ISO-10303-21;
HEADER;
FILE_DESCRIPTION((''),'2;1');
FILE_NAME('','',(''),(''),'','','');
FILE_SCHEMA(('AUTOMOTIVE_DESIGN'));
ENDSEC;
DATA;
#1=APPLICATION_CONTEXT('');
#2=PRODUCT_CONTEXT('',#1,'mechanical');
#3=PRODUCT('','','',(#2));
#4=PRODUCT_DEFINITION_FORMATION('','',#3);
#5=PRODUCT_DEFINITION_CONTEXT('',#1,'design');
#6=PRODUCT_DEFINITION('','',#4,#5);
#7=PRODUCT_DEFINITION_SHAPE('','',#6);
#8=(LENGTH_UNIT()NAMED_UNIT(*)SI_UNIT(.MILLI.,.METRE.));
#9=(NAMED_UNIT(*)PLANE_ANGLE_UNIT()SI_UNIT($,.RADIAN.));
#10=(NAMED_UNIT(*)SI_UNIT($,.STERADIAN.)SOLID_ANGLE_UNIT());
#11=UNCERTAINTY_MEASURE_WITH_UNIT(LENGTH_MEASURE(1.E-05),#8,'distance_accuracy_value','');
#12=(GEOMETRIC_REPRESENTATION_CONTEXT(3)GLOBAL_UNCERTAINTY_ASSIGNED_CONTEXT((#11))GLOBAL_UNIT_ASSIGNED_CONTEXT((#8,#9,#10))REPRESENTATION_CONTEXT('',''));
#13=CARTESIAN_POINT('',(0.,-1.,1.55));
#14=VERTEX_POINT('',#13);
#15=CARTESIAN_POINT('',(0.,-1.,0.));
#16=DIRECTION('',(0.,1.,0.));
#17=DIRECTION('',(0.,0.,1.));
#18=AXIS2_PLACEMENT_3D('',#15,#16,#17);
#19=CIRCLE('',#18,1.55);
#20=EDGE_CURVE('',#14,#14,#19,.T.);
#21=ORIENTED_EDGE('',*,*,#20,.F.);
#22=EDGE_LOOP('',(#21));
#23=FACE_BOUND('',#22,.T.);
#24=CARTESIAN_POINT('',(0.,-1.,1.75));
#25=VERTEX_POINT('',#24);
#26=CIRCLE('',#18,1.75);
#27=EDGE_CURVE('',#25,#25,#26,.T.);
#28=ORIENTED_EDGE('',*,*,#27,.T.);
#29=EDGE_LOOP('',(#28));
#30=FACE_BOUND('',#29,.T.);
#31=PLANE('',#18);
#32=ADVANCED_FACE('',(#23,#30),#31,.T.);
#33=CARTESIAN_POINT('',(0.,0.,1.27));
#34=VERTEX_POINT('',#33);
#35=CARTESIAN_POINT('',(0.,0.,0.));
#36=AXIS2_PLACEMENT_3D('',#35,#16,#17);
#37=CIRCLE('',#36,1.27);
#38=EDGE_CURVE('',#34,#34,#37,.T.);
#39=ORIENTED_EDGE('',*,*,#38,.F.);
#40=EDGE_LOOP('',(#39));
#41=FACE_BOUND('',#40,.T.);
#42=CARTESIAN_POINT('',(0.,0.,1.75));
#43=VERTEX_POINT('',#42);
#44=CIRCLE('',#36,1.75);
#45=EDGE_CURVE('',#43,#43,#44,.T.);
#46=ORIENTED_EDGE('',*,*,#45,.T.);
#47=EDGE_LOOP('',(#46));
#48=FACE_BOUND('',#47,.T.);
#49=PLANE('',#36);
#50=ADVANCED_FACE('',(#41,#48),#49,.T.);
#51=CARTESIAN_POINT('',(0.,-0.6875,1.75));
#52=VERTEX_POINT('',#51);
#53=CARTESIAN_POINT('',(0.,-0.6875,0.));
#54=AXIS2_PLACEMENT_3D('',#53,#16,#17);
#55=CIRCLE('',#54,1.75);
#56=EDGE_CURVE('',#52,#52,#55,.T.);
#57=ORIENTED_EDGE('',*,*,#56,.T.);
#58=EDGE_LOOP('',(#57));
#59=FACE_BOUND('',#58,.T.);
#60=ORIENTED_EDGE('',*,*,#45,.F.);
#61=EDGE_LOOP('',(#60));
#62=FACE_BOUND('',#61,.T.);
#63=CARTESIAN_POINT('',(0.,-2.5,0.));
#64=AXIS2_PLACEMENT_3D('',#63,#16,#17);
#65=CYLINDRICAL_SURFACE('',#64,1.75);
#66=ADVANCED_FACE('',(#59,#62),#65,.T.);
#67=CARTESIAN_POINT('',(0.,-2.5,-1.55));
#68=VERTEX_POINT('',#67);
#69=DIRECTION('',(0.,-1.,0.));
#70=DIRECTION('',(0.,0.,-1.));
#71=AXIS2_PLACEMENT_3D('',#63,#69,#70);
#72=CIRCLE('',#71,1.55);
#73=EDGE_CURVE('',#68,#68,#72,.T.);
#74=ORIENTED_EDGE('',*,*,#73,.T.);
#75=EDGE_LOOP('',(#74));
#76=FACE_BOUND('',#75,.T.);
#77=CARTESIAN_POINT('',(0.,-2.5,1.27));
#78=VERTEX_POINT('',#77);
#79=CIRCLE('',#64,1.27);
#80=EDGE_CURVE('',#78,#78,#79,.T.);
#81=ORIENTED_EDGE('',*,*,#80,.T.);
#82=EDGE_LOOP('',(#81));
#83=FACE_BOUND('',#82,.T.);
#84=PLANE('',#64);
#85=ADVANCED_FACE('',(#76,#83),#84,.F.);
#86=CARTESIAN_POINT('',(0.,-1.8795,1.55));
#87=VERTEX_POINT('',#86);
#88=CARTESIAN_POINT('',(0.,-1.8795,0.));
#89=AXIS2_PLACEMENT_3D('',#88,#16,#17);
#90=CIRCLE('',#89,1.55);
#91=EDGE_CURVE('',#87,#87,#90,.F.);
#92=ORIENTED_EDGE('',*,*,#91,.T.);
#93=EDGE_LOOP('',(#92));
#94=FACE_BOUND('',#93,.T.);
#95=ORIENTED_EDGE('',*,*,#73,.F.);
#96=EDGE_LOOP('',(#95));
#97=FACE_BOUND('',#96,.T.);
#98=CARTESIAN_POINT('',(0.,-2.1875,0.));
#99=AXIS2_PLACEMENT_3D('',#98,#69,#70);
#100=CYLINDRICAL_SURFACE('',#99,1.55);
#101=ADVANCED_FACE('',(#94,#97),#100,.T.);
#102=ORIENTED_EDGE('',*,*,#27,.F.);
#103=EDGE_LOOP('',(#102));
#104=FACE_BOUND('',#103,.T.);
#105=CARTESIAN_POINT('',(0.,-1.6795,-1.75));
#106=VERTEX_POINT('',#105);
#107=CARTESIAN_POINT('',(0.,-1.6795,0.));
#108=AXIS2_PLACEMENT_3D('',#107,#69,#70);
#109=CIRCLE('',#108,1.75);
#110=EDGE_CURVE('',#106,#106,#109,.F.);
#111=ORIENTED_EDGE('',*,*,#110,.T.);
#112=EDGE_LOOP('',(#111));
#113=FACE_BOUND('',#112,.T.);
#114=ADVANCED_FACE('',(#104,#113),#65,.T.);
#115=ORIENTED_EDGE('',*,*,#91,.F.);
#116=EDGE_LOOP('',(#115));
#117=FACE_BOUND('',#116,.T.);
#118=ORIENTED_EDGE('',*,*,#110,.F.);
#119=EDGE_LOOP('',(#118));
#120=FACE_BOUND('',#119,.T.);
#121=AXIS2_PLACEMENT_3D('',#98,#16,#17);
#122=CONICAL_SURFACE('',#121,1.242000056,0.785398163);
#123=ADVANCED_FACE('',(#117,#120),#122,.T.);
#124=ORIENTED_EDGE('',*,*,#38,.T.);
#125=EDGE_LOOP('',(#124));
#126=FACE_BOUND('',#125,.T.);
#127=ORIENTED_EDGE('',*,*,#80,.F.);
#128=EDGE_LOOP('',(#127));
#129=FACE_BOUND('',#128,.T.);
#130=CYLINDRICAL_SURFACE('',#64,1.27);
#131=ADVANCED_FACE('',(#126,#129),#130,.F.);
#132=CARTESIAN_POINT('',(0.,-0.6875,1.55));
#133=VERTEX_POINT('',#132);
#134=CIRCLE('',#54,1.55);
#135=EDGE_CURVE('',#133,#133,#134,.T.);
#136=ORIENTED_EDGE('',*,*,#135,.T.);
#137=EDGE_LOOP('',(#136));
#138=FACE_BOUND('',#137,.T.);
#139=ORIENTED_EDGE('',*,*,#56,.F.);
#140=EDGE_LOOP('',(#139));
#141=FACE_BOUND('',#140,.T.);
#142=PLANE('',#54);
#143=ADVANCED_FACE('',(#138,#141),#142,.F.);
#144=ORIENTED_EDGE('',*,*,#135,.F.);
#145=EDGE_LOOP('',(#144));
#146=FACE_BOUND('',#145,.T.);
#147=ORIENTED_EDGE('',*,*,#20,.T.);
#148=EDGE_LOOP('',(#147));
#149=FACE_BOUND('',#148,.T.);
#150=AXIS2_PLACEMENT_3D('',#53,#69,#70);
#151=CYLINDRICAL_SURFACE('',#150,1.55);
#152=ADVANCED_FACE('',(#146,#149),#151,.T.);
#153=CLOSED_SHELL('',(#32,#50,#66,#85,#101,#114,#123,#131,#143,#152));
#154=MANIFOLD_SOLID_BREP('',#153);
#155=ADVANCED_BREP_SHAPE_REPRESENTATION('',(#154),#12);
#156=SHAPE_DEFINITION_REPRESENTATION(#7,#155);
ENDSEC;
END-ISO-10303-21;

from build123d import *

# Parameters (mm, degrees)
SKETCH1_R           = 1.750000056
SKETCH1_R_2         = 1.27
BOSS_EXTRUDE1_DEPTH = 2.50000008
CUT_EXTRUDE1_START  = -0.31250001
SKETCH2_R           = 1.750000056
SKETCH2_R_2         = 1.549999948
CUT_EXTRUDE1_DEPTH  = 0.31250001
CHAMFER1_SIZE       = 0.508
CUT_EXTRUDE2_START  = -1.81250001
SKETCH2_2_R         = 1.750000056
SKETCH2_2_R_2       = 1.549999948
CUT_EXTRUDE2_DEPTH  = 0.31250001


with BuildPart() as part:
    # Sketch1 → Boss-Extrude1 (new body)
    with BuildSketch(Plane(origin=(0, 0, 0), x_dir=(1, 0, 0), z_dir=(0, 1, 0))):
        with Locations(Location((0, 0, 0), (0, 0, 270))):
            Circle(SKETCH1_R)
        with Locations(Location((0, 0, 0), (0, 0, 270))):
            Circle(SKETCH1_R_2, mode=Mode.SUBTRACT)
    extrude(amount=-BOSS_EXTRUDE1_DEPTH)

    # Sketch2 → Cut-Extrude1 (cut)
    with BuildSketch(Plane.XZ.offset(2.50000008).offset(CUT_EXTRUDE1_START)):
        with Locations(Location((0, 0, 0), (0, 0, 90))):
            Circle(SKETCH2_R)
        with Locations(Location((0, 0, 0), (0, 0, 270))):
            Circle(SKETCH2_R_2, mode=Mode.SUBTRACT)
    extrude(amount=CUT_EXTRUDE1_DEPTH, mode=Mode.SUBTRACT)

    # Chamfer1
    # the kernel refuses this chamfer: 0.508 mm, written as the material it takes off along each edge
    with BuildSketch(Plane(origin=(0, -2.18750007, 0), x_dir=(0, 0, 1), z_dir=(1, 0, 0))) as chamfer1_piece_1_section:
        Polygon((1.750000056, -CHAMFER1_SIZE), (1.750000056 - CHAMFER1_SIZE, 0), (1.750000056, 0), align=None)
    chamfer1_piece_1 = revolve(axis=Axis((0, -2.18750007, 0), (0, -1, 0)), mode=Mode.PRIVATE)
    chamfer1_piece_1 = chamfer1_piece_1 - Plane(origin=(0, -1.779243364, 0), x_dir=(0, 0, -1), z_dir=(0, 1, 0)) * Cylinder(1.549999948, 8, mode=Mode.PRIVATE)
    add(chamfer1_piece_1, mode=Mode.SUBTRACT)

    # Sketch2<2> → Cut-Extrude2 (cut)
    with BuildSketch(Plane.XZ.offset(2.50000008).offset(CUT_EXTRUDE2_START)):
        with Locations(Location((0, 0, 0), (0, 0, 90))):
            Circle(SKETCH2_2_R)
        with Locations(Location((0, 0, 0), (0, 0, 270))):
            Circle(SKETCH2_2_R_2, mode=Mode.SUBTRACT)
    extrude(amount=CUT_EXTRUDE2_DEPTH, mode=Mode.SUBTRACT)


solid = part.part
